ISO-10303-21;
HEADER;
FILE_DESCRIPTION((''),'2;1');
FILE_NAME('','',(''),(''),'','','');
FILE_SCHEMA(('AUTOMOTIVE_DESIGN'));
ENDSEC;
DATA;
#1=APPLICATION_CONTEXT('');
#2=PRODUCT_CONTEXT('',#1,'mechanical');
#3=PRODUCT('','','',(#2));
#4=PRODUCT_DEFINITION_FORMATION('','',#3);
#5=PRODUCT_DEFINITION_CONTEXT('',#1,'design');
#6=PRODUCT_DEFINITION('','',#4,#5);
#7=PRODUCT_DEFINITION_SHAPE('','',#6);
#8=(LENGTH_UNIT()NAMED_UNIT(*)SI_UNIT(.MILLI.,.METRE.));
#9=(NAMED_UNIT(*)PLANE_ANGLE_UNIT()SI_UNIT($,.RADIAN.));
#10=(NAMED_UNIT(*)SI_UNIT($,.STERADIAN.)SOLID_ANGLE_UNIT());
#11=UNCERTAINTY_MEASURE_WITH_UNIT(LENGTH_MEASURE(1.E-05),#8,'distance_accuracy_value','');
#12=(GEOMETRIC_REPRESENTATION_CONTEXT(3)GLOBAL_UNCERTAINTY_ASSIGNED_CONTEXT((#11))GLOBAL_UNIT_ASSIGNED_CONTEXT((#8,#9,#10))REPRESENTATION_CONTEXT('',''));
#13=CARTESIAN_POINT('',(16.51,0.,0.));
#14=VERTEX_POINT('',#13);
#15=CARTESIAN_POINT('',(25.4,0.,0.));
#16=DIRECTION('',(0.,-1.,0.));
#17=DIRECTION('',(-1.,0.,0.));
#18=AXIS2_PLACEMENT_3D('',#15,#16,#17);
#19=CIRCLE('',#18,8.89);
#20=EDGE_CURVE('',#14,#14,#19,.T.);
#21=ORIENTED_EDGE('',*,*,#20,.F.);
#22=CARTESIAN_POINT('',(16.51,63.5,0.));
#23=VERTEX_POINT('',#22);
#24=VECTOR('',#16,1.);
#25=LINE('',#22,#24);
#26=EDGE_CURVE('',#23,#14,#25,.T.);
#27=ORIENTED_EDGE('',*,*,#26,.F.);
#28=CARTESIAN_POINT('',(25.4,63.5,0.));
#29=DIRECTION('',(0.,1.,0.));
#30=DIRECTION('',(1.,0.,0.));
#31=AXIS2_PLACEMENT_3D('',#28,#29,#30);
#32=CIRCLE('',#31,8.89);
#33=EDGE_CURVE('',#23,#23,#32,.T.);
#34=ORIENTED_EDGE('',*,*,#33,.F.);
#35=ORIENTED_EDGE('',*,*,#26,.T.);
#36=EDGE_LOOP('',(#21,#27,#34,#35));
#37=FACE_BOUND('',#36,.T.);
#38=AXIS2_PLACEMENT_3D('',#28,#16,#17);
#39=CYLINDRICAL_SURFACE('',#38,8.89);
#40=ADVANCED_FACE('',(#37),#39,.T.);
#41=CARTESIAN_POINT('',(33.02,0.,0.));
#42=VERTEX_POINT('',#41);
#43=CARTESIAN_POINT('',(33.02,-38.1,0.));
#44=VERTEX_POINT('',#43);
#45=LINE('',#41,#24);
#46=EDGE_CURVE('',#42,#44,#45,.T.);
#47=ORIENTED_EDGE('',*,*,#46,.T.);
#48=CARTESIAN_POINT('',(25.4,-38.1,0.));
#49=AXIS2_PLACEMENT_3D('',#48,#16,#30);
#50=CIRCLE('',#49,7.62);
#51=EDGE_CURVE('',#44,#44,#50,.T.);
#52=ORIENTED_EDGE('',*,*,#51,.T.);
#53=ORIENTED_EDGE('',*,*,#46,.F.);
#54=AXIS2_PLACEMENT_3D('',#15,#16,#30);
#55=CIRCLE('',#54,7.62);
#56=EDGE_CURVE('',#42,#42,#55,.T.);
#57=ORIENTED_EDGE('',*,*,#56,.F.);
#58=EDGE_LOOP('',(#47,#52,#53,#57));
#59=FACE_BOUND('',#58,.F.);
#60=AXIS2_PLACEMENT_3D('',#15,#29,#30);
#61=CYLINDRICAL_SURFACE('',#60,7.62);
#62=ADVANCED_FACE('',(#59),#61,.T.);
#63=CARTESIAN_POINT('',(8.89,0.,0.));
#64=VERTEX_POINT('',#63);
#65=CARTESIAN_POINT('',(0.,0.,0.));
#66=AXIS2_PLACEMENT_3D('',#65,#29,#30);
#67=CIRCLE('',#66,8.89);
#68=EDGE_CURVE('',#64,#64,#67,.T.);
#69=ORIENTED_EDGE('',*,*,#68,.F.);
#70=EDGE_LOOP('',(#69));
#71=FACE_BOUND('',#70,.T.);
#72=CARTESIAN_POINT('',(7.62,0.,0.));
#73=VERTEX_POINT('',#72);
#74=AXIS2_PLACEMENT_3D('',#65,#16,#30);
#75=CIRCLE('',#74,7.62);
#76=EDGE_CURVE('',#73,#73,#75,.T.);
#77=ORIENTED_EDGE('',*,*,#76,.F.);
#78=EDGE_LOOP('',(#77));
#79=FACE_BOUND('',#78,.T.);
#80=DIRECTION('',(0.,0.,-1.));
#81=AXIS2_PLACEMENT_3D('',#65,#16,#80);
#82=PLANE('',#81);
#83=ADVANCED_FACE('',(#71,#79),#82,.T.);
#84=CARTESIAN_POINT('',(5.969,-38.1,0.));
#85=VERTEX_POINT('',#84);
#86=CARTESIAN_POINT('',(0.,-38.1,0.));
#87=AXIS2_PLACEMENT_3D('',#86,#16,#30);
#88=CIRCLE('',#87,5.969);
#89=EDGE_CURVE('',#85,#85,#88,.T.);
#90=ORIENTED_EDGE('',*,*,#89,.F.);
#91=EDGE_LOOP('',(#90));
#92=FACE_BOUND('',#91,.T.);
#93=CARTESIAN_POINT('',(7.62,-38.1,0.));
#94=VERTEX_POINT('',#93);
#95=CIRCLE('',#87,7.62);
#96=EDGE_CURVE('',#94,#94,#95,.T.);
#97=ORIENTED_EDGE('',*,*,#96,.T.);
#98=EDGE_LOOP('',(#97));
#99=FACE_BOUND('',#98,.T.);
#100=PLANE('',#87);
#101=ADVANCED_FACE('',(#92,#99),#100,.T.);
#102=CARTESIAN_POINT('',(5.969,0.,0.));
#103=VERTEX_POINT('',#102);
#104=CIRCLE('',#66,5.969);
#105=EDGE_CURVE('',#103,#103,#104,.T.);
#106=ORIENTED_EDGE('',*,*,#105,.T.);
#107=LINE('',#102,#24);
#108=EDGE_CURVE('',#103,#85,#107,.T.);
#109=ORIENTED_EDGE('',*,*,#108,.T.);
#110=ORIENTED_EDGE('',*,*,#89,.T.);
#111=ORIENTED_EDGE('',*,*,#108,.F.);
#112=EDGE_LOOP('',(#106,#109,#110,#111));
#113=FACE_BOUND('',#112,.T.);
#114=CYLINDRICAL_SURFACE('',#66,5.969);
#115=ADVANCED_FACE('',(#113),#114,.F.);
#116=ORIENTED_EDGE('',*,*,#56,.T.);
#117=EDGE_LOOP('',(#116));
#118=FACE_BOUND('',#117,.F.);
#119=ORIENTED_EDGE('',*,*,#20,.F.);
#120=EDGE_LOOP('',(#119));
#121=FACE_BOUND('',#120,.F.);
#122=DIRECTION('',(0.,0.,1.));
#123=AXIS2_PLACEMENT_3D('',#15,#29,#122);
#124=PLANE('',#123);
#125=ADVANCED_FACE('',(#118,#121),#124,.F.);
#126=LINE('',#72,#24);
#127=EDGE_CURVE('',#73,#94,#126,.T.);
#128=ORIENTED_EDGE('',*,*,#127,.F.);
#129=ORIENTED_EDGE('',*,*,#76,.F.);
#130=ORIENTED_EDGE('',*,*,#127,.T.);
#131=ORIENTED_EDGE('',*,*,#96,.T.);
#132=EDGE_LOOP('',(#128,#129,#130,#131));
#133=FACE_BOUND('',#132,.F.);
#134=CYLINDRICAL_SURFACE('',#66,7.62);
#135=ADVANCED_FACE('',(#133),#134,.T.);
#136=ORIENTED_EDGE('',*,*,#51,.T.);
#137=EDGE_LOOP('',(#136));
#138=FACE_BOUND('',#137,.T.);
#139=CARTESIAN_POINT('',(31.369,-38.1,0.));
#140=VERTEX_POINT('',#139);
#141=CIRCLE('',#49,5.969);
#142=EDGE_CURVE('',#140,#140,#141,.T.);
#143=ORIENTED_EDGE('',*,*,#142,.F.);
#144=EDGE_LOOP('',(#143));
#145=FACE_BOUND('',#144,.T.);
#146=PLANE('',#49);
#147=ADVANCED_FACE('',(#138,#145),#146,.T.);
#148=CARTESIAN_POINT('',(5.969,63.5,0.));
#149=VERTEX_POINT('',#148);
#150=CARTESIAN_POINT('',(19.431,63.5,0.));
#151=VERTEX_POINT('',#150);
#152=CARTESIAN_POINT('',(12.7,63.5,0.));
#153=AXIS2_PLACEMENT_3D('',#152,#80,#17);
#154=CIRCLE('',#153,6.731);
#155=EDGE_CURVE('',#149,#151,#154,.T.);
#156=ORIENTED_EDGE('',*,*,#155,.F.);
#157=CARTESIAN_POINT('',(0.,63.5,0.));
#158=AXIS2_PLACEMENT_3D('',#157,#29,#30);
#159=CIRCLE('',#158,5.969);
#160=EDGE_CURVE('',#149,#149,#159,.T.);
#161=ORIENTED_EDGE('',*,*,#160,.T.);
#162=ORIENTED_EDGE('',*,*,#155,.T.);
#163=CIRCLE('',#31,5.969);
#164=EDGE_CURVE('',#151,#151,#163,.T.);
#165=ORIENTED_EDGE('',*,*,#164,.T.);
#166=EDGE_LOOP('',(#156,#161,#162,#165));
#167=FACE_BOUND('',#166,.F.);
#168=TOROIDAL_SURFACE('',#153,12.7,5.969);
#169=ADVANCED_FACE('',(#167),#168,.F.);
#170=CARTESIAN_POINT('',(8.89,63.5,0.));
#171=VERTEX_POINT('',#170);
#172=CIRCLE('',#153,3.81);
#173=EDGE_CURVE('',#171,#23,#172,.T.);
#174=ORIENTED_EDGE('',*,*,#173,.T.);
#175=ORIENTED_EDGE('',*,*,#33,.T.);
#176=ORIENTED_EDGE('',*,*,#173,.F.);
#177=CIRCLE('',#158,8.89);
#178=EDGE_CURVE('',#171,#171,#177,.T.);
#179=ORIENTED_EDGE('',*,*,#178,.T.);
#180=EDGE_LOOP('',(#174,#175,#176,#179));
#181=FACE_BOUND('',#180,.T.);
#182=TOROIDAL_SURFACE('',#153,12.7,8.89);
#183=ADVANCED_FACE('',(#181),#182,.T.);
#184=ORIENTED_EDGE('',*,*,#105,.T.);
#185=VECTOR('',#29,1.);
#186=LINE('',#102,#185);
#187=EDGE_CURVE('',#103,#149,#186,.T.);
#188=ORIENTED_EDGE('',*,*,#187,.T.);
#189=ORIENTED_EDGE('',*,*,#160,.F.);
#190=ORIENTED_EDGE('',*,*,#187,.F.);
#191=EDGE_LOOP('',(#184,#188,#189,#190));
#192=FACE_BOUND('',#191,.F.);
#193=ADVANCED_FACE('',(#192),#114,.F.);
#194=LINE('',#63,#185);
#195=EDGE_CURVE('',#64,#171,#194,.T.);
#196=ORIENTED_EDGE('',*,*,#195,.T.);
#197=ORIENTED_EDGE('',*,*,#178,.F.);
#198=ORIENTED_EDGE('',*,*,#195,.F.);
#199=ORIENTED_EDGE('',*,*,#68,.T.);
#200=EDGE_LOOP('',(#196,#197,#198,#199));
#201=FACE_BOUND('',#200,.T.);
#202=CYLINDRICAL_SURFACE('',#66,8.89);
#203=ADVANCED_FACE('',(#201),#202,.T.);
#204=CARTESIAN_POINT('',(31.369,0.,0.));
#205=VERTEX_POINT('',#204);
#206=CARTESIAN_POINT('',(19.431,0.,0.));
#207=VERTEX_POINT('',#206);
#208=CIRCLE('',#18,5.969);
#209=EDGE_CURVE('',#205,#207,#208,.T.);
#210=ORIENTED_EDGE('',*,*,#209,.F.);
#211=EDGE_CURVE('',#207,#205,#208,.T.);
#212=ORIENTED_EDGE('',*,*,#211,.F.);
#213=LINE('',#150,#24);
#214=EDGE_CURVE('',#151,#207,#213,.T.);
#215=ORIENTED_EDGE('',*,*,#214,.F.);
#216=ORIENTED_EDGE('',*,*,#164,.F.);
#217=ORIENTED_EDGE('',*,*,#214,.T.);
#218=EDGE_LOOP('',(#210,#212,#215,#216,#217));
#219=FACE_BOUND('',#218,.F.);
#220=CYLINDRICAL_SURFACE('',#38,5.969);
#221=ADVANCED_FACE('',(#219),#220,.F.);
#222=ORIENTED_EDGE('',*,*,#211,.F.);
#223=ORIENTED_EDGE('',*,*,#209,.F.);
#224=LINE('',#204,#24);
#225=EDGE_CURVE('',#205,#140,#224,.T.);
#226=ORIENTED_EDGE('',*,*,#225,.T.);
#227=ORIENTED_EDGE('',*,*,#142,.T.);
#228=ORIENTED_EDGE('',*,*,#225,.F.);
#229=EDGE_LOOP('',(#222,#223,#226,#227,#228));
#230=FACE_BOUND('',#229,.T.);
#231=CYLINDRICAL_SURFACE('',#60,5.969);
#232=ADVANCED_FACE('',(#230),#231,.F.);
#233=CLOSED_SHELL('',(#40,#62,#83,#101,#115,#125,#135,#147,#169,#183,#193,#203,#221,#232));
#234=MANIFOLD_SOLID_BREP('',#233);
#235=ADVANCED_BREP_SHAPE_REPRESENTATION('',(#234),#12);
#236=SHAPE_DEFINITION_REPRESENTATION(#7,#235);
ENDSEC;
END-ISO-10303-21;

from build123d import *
from build123d import SkipClean  # not in build123d's __all__

# Parameters (mm, degrees)
F0_R     = 8.89
F0_R_2   = 5.969
F3_R     = 7.62
F3_R_2   = 5.969
F4_R     = 7.62
F4_R_2   = 5.969
F5_DEPTH = 38.1


with BuildPart() as f2:
    # F2: sweep along a path in F1
    with BuildLine(Plane.XY) as f2_path:
        Line((0, 0), (0, 63.5))
        ThreePointArc((0, 63.5), (12.7, 76.2), (25.4, 63.5))
        Line((25.4, 63.5), (25.4, 0))
    # F0 (on Front) → F2 (sweep)
    with BuildSketch(Plane.XZ):
        Circle(F0_R)
        Circle(F0_R_2, mode=Mode.SUBTRACT)
    sweep(path=f2_path.line)

    # F3 (on face) + F4 (on face) → F5 (join)
    with BuildSketch(Plane.XZ):
        Circle(F3_R)
        Circle(F3_R_2, mode=Mode.SUBTRACT)
    with BuildSketch(Plane.XZ):
        with Locations((25.4, 0)):
            Circle(F4_R)
        with Locations((25.4, 0)):
            Circle(F4_R_2, mode=Mode.SUBTRACT)
    with SkipClean():  # cleaning this boolean's faces spoils the solid; the shape is the same uncleaned
        extrude(amount=F5_DEPTH)


solid = f2.part
